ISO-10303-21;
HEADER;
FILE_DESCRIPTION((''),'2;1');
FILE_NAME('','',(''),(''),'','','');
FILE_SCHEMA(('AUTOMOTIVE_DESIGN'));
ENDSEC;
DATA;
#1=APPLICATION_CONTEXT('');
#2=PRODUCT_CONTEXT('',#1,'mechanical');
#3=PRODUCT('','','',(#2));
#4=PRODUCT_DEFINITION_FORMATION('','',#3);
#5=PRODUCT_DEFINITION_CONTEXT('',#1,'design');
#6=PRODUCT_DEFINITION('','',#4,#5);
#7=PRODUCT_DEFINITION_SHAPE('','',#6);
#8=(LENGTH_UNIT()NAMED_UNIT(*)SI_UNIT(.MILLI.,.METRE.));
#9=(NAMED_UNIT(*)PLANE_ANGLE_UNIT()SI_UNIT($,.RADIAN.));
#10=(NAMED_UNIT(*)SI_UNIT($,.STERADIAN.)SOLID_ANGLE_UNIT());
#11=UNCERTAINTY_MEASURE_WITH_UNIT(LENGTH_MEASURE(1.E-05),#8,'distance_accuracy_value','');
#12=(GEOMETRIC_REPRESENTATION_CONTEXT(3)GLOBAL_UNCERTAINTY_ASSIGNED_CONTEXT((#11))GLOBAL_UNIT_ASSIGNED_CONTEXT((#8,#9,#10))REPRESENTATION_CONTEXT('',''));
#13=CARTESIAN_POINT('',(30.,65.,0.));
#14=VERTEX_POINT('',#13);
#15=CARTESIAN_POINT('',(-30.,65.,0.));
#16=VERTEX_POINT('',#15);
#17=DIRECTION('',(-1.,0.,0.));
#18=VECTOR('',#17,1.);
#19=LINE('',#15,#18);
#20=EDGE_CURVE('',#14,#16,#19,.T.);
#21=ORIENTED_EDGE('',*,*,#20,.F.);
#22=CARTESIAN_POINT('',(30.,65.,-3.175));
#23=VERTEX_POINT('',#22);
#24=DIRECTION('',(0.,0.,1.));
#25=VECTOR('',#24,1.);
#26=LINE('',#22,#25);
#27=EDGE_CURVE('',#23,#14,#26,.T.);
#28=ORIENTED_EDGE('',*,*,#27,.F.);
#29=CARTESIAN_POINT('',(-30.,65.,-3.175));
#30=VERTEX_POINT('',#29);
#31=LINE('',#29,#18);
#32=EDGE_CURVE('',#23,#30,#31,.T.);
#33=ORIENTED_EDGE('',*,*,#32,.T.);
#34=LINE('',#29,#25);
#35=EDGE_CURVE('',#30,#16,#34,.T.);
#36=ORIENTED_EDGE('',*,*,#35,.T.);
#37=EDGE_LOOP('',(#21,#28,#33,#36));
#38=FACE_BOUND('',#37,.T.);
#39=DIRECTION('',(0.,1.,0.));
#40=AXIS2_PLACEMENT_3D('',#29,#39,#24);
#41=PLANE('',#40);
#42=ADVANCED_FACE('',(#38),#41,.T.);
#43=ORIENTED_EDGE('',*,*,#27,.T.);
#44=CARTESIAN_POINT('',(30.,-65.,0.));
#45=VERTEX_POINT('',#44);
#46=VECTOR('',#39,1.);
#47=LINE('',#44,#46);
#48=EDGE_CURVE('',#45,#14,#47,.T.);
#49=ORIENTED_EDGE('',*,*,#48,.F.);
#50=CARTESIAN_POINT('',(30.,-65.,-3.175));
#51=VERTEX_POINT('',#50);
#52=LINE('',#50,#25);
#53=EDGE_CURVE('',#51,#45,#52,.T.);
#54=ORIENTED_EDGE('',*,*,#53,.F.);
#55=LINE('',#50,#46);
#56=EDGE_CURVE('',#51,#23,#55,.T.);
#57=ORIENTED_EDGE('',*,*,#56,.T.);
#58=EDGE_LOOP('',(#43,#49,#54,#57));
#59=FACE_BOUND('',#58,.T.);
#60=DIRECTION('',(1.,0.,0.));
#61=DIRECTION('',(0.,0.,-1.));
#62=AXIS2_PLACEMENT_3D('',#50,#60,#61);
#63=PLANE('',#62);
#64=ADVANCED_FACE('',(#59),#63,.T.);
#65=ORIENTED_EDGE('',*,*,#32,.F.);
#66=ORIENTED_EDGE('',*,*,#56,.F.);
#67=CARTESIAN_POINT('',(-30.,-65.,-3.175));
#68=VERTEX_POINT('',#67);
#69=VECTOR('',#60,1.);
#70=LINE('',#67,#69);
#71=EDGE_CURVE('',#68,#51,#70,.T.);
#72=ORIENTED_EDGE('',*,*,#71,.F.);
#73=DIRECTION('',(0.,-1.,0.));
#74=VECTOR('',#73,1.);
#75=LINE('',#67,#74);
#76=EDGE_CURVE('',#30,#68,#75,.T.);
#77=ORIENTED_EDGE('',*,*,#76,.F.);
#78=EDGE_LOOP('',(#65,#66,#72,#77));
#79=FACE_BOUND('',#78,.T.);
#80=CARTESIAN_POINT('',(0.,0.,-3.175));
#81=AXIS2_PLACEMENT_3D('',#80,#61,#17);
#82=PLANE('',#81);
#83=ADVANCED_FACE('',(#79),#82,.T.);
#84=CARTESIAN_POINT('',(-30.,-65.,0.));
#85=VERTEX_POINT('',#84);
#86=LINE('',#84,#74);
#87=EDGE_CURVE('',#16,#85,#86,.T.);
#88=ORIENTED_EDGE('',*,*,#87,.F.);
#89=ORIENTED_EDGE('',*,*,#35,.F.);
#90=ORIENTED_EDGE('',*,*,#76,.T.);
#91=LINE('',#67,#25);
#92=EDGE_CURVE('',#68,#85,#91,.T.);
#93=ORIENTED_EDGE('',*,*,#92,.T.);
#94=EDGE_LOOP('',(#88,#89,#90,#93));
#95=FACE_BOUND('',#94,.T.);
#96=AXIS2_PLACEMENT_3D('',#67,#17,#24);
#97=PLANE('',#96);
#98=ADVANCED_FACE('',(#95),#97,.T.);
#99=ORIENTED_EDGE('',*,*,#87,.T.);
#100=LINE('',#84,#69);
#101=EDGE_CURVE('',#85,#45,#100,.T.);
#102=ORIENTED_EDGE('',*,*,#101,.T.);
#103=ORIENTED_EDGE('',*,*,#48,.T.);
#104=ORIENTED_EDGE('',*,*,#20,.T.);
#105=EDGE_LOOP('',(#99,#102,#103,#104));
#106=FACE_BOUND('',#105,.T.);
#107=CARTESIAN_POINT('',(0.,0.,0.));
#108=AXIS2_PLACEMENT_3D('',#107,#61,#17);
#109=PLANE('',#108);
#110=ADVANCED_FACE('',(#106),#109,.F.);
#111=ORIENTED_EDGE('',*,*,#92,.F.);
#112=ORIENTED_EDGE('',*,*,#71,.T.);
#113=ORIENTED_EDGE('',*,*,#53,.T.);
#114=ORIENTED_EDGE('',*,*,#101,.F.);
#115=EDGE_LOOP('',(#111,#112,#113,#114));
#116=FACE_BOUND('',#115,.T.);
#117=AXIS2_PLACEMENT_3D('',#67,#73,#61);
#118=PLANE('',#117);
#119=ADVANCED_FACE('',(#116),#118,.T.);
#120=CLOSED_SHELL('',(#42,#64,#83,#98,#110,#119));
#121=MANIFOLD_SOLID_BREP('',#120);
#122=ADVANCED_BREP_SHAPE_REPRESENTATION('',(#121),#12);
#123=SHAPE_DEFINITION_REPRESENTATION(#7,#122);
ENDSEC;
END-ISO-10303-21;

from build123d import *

# Parameters (mm, degrees)
SKETCH1_W          = 60
SKETCH1_H          = 130
BASE_FLANGE1_DEPTH = 3.175


# Sheet-metal steps are written as plain solids
with BuildPart() as part:
    # Sketch1 → Base-Flange1 (new body)
    with BuildSketch(Plane.XY):
        Rectangle(SKETCH1_W, SKETCH1_H)
    extrude(amount=-BASE_FLANGE1_DEPTH)


solid = part.part
